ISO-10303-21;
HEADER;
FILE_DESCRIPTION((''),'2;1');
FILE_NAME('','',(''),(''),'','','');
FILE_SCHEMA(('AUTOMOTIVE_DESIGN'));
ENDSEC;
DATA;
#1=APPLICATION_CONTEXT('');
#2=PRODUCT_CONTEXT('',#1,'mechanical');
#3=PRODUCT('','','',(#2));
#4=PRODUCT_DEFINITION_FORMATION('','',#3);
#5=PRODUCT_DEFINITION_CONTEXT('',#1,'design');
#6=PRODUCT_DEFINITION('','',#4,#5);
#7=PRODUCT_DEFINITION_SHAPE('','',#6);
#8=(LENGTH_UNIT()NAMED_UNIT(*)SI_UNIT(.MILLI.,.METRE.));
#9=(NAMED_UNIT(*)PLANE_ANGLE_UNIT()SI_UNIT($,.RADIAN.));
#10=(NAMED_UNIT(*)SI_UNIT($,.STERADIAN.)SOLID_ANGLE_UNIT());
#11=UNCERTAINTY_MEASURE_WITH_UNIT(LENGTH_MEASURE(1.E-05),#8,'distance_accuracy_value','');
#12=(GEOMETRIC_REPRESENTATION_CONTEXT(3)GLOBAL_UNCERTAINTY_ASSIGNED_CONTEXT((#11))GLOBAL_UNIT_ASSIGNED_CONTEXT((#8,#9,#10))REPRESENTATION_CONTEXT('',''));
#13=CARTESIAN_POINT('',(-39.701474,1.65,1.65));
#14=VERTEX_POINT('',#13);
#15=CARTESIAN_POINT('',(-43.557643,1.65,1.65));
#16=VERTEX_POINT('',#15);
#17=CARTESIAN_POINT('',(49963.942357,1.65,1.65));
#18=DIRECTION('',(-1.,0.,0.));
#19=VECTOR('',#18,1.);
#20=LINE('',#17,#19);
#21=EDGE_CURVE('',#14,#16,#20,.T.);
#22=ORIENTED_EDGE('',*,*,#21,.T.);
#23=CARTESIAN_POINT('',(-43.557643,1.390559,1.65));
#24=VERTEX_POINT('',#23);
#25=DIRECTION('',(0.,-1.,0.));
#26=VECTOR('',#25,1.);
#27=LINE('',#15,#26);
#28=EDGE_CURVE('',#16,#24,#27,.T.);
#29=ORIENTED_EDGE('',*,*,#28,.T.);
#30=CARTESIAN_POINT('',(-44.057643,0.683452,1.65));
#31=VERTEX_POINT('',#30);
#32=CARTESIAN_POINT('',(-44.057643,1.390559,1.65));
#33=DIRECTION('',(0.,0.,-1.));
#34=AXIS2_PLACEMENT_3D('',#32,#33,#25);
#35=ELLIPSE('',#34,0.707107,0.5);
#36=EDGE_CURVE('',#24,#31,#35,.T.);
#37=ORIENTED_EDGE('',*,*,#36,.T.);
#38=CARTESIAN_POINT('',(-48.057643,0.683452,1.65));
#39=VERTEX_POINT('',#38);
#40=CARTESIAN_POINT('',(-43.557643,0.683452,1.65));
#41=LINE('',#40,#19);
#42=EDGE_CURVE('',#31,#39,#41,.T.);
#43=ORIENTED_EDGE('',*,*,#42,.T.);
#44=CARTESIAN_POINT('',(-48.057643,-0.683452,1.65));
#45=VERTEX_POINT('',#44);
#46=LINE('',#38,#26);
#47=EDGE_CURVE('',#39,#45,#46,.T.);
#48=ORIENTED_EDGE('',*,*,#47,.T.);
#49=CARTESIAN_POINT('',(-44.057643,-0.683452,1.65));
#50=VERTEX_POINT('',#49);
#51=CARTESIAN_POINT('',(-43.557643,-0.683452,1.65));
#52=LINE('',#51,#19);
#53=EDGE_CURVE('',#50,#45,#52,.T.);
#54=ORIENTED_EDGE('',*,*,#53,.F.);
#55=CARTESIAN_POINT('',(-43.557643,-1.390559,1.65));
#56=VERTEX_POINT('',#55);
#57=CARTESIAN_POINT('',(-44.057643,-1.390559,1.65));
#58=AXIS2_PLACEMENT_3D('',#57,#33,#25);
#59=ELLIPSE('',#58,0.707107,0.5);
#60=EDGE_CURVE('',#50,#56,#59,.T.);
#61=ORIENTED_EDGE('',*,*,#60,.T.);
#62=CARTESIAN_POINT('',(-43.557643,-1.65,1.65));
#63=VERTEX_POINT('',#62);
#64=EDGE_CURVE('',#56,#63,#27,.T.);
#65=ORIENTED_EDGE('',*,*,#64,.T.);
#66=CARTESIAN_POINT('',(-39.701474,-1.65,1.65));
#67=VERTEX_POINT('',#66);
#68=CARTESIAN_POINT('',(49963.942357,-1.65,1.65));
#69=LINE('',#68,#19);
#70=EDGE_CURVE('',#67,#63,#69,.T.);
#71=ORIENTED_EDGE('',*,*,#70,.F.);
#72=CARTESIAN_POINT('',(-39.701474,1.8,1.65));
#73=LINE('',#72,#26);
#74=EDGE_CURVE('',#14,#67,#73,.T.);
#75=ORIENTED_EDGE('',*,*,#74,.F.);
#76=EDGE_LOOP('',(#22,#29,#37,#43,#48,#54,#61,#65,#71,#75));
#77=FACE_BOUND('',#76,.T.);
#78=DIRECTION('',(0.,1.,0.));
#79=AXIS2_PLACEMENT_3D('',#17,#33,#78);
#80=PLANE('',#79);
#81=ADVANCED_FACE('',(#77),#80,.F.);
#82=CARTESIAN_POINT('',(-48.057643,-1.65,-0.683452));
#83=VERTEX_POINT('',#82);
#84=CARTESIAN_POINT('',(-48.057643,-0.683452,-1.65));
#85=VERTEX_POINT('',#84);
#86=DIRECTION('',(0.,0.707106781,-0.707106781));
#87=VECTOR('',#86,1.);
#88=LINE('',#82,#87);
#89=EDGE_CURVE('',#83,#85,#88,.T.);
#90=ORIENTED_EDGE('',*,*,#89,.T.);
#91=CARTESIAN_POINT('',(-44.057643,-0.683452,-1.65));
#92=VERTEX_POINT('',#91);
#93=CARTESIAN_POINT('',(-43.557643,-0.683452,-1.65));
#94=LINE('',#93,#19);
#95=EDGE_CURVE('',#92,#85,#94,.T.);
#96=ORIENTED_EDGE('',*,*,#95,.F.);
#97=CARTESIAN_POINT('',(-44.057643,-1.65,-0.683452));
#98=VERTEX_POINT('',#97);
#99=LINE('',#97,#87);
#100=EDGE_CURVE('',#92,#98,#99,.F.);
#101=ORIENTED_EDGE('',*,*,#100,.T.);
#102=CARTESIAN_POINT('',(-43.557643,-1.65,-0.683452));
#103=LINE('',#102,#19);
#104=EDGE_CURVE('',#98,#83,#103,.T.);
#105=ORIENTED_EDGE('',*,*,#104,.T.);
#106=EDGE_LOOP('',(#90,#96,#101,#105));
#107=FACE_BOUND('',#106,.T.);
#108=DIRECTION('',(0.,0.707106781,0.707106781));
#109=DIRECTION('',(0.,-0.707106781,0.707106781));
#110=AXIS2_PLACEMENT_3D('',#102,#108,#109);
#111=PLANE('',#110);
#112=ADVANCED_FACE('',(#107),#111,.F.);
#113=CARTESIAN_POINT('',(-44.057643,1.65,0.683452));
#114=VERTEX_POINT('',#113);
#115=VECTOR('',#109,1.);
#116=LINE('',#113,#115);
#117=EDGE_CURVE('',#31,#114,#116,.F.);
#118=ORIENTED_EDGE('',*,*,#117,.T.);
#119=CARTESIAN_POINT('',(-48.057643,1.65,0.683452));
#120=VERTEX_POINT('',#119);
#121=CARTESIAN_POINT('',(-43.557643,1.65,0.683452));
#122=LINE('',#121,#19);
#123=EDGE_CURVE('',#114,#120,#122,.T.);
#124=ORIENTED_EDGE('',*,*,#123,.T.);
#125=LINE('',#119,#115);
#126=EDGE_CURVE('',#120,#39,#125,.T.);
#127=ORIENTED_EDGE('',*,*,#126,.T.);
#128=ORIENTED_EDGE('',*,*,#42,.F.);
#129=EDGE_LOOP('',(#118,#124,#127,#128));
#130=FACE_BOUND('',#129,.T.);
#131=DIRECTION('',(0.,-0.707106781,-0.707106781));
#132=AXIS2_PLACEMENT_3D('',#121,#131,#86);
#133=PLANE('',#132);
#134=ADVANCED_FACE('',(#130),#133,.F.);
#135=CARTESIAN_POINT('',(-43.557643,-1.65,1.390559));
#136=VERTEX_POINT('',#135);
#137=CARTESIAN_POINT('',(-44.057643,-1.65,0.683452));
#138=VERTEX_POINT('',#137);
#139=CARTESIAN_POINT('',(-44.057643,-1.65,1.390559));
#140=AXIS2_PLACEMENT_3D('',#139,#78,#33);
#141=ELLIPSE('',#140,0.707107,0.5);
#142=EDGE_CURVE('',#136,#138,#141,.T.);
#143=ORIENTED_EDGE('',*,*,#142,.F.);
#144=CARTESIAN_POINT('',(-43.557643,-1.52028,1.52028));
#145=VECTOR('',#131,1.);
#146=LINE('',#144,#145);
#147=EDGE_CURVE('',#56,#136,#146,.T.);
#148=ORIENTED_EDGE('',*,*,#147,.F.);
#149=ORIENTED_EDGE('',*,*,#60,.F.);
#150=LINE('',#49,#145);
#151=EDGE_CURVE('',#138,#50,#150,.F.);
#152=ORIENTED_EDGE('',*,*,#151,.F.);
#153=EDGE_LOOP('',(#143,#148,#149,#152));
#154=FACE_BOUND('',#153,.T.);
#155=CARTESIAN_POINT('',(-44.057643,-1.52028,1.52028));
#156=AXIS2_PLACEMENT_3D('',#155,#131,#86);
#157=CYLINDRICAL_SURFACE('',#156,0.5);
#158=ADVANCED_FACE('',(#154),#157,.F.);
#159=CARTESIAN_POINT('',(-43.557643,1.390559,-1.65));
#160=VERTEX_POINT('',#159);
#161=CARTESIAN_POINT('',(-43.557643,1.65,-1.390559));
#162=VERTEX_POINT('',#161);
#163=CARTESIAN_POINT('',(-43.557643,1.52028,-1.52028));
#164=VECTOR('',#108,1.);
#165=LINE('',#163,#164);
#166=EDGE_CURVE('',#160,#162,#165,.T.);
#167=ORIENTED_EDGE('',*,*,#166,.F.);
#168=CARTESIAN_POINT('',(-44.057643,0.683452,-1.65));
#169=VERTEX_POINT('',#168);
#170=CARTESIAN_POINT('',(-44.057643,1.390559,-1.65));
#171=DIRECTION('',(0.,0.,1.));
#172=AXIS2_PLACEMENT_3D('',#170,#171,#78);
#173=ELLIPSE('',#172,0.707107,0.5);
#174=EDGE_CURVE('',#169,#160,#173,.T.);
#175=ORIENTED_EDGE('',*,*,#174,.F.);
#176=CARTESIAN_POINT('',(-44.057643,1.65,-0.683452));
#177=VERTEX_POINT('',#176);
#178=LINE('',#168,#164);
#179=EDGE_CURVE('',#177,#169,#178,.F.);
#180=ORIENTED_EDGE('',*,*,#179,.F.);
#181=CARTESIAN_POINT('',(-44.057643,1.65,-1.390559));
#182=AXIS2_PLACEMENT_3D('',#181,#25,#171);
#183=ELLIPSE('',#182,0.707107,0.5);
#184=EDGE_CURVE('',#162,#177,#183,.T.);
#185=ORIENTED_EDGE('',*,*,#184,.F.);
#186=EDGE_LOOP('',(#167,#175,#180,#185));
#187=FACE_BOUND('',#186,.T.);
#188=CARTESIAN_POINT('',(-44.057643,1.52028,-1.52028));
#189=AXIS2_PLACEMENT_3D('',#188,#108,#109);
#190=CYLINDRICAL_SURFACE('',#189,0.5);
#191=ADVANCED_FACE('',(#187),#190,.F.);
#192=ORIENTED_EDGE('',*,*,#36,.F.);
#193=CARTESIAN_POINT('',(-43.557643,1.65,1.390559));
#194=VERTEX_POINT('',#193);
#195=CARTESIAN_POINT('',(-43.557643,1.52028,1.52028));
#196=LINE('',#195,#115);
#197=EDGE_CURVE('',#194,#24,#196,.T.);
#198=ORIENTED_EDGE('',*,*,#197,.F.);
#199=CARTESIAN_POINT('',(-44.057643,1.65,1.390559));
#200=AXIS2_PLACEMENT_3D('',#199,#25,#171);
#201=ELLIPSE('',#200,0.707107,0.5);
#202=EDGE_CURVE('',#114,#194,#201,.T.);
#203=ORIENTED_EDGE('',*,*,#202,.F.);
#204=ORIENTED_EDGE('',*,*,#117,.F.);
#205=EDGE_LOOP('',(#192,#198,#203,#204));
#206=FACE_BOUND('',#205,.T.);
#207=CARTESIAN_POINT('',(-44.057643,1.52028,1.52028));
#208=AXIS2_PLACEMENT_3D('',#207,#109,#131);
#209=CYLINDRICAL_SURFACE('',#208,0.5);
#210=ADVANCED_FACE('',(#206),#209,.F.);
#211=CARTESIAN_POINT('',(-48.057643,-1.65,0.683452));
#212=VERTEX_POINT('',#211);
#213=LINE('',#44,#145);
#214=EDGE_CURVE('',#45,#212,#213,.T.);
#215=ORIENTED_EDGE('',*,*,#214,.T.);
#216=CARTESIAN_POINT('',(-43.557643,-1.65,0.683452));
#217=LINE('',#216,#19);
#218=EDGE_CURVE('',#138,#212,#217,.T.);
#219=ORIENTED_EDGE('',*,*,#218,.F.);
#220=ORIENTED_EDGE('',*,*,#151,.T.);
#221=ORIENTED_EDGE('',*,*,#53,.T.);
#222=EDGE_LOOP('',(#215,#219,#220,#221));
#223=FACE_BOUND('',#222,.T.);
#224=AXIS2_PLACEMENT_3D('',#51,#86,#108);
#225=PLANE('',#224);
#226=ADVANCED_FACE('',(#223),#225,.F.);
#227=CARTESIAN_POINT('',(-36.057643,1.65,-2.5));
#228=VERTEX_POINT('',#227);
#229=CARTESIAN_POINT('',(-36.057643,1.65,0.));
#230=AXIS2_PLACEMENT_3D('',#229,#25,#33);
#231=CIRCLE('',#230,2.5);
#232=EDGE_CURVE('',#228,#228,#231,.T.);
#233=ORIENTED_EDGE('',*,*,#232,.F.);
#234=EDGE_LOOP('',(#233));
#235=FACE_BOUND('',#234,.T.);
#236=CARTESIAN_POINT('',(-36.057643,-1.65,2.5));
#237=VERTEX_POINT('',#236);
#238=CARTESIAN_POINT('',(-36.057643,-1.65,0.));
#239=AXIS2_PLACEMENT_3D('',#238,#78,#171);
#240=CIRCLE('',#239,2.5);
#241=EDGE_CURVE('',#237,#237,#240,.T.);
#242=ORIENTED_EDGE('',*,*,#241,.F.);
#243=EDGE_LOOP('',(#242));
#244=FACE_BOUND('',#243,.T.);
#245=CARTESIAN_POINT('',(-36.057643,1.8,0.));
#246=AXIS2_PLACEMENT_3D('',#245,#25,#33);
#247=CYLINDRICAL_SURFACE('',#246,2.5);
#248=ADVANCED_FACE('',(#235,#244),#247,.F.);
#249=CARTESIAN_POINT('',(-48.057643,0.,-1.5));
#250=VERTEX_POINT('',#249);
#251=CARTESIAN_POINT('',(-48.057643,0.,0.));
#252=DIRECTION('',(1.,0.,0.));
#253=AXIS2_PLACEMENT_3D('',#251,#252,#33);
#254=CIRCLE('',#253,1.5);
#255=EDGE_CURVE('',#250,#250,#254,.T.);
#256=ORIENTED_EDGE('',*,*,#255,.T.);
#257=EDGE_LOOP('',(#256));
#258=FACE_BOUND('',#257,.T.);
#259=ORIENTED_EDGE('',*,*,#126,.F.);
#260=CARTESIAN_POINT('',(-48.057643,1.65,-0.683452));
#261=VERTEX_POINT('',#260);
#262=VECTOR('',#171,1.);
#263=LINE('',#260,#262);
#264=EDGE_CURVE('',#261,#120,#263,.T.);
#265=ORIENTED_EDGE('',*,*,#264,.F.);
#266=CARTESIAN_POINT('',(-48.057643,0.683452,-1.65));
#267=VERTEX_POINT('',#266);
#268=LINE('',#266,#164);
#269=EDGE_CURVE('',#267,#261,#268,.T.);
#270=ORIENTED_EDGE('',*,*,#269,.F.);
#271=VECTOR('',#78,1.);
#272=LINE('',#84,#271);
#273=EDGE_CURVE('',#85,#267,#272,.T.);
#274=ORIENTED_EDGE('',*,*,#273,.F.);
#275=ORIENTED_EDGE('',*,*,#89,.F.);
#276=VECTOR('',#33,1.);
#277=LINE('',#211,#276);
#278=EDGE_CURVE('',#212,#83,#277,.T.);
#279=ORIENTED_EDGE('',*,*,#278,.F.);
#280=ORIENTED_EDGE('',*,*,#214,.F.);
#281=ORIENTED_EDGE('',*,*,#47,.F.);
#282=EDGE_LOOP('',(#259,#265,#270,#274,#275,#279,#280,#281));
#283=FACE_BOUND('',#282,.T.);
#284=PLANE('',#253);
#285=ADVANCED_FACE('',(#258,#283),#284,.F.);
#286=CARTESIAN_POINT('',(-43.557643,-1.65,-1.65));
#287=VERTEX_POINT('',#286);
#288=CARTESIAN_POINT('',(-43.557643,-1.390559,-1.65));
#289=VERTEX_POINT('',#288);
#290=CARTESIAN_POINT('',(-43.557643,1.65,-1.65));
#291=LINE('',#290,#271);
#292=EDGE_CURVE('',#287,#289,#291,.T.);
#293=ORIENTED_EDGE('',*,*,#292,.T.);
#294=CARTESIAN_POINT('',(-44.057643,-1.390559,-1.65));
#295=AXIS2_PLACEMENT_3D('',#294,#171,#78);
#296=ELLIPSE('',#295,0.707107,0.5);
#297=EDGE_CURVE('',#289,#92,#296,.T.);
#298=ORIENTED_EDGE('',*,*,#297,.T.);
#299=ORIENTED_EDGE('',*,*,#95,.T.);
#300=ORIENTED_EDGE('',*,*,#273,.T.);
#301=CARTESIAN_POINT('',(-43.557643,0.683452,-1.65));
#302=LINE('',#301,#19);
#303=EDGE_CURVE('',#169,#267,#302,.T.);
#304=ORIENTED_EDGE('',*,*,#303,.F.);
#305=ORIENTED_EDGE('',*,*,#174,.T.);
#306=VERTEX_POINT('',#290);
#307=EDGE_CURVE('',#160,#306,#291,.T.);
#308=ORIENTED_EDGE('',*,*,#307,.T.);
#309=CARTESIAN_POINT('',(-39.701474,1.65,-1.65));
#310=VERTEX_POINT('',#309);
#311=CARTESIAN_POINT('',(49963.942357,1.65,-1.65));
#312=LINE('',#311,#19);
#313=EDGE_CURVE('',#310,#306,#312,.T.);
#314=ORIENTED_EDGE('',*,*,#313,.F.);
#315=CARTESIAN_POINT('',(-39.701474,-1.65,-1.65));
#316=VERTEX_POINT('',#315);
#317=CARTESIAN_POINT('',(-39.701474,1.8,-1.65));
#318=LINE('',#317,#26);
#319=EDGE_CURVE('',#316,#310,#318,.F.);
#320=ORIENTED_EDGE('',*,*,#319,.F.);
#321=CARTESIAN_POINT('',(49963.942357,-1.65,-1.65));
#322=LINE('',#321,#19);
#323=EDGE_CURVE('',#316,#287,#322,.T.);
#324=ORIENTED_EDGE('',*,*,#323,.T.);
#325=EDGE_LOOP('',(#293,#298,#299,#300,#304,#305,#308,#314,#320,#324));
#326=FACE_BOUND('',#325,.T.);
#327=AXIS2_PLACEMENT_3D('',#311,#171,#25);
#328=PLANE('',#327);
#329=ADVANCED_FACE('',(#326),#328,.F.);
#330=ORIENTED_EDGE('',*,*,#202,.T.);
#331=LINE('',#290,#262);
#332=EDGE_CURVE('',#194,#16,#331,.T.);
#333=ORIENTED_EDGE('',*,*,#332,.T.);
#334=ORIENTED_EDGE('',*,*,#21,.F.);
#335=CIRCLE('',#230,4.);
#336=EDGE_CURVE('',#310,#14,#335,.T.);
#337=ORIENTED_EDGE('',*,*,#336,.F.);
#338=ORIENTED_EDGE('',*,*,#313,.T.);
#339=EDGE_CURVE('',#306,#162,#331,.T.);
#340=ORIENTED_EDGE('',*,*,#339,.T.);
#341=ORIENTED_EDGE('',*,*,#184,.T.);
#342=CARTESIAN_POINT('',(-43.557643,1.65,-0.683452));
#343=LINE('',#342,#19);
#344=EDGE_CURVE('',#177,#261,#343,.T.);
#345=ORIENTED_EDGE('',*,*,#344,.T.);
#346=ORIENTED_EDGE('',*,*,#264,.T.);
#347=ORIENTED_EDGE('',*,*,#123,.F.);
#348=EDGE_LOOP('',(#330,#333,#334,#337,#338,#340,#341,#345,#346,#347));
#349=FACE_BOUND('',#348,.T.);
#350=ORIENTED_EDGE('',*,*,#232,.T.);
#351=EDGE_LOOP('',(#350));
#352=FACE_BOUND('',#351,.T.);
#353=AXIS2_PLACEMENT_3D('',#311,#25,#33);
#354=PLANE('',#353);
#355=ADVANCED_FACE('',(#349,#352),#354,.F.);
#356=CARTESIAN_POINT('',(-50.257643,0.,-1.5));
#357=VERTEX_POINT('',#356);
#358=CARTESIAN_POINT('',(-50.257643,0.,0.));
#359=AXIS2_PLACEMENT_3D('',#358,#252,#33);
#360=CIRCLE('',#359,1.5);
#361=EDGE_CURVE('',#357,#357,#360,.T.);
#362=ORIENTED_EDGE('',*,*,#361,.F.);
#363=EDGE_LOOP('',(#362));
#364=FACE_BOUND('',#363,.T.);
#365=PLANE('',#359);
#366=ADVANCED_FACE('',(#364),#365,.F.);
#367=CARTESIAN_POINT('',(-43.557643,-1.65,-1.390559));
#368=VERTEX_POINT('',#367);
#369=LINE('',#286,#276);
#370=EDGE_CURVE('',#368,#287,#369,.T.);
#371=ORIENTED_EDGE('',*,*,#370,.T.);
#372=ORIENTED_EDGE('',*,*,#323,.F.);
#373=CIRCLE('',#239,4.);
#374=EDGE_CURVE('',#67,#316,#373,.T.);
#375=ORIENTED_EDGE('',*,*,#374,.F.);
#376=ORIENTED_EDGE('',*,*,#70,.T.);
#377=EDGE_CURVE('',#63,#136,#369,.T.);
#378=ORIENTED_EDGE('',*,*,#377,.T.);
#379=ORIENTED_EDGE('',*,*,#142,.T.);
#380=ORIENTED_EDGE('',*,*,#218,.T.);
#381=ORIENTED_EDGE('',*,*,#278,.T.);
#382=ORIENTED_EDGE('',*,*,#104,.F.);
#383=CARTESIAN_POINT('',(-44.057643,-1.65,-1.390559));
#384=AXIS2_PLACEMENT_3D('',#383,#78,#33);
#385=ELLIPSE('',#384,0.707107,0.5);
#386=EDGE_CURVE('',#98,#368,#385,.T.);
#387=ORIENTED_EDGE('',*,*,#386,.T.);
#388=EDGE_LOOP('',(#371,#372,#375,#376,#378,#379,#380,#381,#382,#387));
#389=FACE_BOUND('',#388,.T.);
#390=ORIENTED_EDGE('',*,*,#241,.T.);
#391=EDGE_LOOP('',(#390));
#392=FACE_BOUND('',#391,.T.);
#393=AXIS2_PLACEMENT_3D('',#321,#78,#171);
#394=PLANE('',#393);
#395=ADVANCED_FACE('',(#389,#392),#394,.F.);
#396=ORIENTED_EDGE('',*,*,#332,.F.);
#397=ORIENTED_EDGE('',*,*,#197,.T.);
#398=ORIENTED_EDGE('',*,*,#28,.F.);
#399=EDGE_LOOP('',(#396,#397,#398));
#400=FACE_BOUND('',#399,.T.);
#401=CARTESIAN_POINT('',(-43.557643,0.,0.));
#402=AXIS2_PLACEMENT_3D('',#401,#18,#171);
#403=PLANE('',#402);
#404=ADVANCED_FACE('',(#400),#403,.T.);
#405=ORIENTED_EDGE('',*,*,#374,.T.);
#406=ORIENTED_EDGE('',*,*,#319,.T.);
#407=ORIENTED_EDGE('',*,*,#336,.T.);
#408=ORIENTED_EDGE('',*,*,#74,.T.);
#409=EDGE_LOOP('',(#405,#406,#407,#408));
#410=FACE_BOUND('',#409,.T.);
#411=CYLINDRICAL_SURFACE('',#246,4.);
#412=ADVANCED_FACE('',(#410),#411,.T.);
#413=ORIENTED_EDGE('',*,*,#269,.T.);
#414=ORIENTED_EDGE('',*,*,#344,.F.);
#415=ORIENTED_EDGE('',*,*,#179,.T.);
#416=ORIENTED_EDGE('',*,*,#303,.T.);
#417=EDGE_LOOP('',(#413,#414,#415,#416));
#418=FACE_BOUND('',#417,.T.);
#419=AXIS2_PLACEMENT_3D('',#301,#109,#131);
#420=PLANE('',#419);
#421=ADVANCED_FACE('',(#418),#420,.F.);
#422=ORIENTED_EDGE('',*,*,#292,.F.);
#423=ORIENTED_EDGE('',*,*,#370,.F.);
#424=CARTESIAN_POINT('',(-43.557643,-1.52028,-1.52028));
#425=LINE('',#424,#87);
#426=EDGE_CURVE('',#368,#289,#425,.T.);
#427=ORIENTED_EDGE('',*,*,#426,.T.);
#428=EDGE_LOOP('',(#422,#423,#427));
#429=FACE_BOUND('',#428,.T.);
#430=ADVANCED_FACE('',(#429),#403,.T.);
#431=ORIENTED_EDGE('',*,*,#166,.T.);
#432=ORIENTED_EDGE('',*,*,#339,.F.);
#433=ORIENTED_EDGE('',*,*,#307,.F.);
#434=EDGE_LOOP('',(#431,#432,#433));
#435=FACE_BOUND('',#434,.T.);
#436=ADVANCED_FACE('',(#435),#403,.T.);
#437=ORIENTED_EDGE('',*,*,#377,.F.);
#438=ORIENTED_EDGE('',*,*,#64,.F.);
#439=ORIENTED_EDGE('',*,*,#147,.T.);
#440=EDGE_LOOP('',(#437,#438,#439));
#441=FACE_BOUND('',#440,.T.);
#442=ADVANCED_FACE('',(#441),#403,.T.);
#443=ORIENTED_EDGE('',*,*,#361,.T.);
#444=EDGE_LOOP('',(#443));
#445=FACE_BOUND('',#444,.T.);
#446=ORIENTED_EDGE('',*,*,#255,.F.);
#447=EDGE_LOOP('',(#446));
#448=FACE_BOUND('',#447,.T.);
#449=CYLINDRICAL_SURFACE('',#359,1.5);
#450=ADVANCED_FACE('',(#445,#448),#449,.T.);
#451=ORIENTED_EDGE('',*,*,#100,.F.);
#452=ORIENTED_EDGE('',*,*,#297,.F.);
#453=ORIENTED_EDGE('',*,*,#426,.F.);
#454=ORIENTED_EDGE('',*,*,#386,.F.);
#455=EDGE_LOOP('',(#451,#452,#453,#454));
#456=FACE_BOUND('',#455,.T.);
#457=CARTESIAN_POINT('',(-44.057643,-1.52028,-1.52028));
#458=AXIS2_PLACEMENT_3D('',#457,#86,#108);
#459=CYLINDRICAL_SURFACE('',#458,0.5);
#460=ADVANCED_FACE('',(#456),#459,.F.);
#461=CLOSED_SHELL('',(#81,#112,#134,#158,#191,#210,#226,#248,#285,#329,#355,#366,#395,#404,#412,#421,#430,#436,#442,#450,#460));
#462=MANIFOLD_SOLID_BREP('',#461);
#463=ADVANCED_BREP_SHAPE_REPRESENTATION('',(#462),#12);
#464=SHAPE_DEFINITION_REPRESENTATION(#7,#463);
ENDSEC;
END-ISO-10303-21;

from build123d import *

# Parameters (mm, degrees)
SKETCH1_R                = 40
SKETCH1_R_2              = 25
BOSS_EXTRUDE1_DEPTH      = 18
BOSS_EXTRUDE2_DEPTH      = 45
SKETCH3_R                = 15
BOSS_EXTRUDE3_DEPTH      = 22
BOSS_EXTRUDE4_REACH      = 125.081
SKETCH4_W                = 33
SKETCH4_H                = 33
FILLET1_R                = 5
FILLET7_R                = 1.5
SCALA2_SCALE             = 0.1
SCHIZZO3_W               = 13.390862708
SCHIZZO3_H               = 12.193146248
TAGLIO_ESTRUSIONE3_DEPTH = 0.15
SCHIZZO4_W               = 17.573052966
SCHIZZO4_H               = 12.055703376
TAGLIO_ESTRUSIONE4_DEPTH = 0.15


with BuildPart() as part:
    # Sketch1 → Boss-Extrude1 (new, symmetric)
    with BuildSketch(Plane(origin=(0, 0, 0), x_dir=(1, 0, 0), z_dir=(0, 1, 0))):
        with Locations(Location((0, 0, 0), (0, 0, 270))):
            Circle(SKETCH1_R)
        with Locations(Location((0, 0, 0), (0, 0, 270))):
            Circle(SKETCH1_R_2, mode=Mode.SUBTRACT)
    extrude(amount=BOSS_EXTRUDE1_DEPTH, both=True)

    # Sketch4 → Boss-Extrude4 (add, up to next)
    with BuildSketch(Plane(origin=(-75, 0, 0), x_dir=(0, 0, -1), z_dir=(1, 0, 0)), mode=Mode.PRIVATE) as boss_extrude4_sk1:
        Rectangle(SKETCH4_W, SKETCH4_H)
    boss_extrude4_tool1 = extrude(boss_extrude4_sk1.sketch, amount=BOSS_EXTRUDE4_REACH, mode=Mode.PRIVATE) - part.part


with BuildPart() as body_2:
    # Sketch2 → Boss-Extrude2 (new body)
    with BuildSketch(Plane(origin=(-120, 0, 0), x_dir=(0, 0, -1), z_dir=(1, 0, 0))):
        Polygon((-16.5, 6.834523779), (-16.5, -6.834523779), (-6.834523779, -16.5), (6.834523779, -16.5), (16.5, -6.834523779), (16.5, 6.834523779), (6.834523779, 16.5), (-6.834523779, 16.5), align=None)
    extrude(amount=BOSS_EXTRUDE2_DEPTH)

    # Sketch3 → Boss-Extrude3 (add)
    with BuildSketch(Plane(origin=(-120, 0, 0), x_dir=(0, 0, -1), z_dir=(1, 0, 0))):
        Circle(SKETCH3_R)
    extrude(amount=-BOSS_EXTRUDE3_DEPTH)


with BuildPart() as part_1:
    add(part.part)

    add(body_2.part)  # Boss-Extrude4 merges body 2
    add(boss_extrude4_tool1.solids().sort_by_distance((-75, 0, 0))[0])

    # Fillet1
    fillet1_edges = [part_1.edges().sort_by_distance(p)[0] for p in [
        (-75, 11.66726189, 11.66726189),
        (-75, -11.66726189, 11.66726189),
        (-75, -11.66726189, -11.66726189),
        (-75, 11.66726189, -11.66726189),
    ]]
    fillet(fillet1_edges, radius=FILLET1_R)

    # Fillet7
    fillet7_edges = [part_1.edges().sort_by_distance(p)[0] for p in [
        (-40, -16.5, 0),
        (-40, 16.5, 0),
    ]]
    fillet(fillet7_edges, radius=FILLET7_R - 0.0001)  # a hair under: the kernel refuses the full size


with BuildPart() as part_2:
    # Scala2: scaled about (-40.064009794, 0, -1e-09)
    add(part_1.part.scale(SCALA2_SCALE).moved(Location((-36.057608815, 0, -1e-09))))

    # Schizzo3 → Taglio-Estrusione3 (cut)
    with BuildSketch(Plane(origin=(0, 1.8, 0), x_dir=(1, 0, 0), z_dir=(0, 1, 0))):
        with Locations((-35.542120141, -0.94246541)):
            Rectangle(SCHIZZO3_W, SCHIZZO3_H)
    extrude(amount=-TAGLIO_ESTRUSIONE3_DEPTH, mode=Mode.SUBTRACT)

    # Schizzo4 → Taglio-Estrusione4 (cut)
    with BuildSketch(Plane.XZ.offset(1.8)):
        with Locations((-38.634584769, -0.834474582)):
            Rectangle(SCHIZZO4_W, SCHIZZO4_H)
    extrude(amount=-TAGLIO_ESTRUSIONE4_DEPTH, mode=Mode.SUBTRACT)


solid = part_2.part
